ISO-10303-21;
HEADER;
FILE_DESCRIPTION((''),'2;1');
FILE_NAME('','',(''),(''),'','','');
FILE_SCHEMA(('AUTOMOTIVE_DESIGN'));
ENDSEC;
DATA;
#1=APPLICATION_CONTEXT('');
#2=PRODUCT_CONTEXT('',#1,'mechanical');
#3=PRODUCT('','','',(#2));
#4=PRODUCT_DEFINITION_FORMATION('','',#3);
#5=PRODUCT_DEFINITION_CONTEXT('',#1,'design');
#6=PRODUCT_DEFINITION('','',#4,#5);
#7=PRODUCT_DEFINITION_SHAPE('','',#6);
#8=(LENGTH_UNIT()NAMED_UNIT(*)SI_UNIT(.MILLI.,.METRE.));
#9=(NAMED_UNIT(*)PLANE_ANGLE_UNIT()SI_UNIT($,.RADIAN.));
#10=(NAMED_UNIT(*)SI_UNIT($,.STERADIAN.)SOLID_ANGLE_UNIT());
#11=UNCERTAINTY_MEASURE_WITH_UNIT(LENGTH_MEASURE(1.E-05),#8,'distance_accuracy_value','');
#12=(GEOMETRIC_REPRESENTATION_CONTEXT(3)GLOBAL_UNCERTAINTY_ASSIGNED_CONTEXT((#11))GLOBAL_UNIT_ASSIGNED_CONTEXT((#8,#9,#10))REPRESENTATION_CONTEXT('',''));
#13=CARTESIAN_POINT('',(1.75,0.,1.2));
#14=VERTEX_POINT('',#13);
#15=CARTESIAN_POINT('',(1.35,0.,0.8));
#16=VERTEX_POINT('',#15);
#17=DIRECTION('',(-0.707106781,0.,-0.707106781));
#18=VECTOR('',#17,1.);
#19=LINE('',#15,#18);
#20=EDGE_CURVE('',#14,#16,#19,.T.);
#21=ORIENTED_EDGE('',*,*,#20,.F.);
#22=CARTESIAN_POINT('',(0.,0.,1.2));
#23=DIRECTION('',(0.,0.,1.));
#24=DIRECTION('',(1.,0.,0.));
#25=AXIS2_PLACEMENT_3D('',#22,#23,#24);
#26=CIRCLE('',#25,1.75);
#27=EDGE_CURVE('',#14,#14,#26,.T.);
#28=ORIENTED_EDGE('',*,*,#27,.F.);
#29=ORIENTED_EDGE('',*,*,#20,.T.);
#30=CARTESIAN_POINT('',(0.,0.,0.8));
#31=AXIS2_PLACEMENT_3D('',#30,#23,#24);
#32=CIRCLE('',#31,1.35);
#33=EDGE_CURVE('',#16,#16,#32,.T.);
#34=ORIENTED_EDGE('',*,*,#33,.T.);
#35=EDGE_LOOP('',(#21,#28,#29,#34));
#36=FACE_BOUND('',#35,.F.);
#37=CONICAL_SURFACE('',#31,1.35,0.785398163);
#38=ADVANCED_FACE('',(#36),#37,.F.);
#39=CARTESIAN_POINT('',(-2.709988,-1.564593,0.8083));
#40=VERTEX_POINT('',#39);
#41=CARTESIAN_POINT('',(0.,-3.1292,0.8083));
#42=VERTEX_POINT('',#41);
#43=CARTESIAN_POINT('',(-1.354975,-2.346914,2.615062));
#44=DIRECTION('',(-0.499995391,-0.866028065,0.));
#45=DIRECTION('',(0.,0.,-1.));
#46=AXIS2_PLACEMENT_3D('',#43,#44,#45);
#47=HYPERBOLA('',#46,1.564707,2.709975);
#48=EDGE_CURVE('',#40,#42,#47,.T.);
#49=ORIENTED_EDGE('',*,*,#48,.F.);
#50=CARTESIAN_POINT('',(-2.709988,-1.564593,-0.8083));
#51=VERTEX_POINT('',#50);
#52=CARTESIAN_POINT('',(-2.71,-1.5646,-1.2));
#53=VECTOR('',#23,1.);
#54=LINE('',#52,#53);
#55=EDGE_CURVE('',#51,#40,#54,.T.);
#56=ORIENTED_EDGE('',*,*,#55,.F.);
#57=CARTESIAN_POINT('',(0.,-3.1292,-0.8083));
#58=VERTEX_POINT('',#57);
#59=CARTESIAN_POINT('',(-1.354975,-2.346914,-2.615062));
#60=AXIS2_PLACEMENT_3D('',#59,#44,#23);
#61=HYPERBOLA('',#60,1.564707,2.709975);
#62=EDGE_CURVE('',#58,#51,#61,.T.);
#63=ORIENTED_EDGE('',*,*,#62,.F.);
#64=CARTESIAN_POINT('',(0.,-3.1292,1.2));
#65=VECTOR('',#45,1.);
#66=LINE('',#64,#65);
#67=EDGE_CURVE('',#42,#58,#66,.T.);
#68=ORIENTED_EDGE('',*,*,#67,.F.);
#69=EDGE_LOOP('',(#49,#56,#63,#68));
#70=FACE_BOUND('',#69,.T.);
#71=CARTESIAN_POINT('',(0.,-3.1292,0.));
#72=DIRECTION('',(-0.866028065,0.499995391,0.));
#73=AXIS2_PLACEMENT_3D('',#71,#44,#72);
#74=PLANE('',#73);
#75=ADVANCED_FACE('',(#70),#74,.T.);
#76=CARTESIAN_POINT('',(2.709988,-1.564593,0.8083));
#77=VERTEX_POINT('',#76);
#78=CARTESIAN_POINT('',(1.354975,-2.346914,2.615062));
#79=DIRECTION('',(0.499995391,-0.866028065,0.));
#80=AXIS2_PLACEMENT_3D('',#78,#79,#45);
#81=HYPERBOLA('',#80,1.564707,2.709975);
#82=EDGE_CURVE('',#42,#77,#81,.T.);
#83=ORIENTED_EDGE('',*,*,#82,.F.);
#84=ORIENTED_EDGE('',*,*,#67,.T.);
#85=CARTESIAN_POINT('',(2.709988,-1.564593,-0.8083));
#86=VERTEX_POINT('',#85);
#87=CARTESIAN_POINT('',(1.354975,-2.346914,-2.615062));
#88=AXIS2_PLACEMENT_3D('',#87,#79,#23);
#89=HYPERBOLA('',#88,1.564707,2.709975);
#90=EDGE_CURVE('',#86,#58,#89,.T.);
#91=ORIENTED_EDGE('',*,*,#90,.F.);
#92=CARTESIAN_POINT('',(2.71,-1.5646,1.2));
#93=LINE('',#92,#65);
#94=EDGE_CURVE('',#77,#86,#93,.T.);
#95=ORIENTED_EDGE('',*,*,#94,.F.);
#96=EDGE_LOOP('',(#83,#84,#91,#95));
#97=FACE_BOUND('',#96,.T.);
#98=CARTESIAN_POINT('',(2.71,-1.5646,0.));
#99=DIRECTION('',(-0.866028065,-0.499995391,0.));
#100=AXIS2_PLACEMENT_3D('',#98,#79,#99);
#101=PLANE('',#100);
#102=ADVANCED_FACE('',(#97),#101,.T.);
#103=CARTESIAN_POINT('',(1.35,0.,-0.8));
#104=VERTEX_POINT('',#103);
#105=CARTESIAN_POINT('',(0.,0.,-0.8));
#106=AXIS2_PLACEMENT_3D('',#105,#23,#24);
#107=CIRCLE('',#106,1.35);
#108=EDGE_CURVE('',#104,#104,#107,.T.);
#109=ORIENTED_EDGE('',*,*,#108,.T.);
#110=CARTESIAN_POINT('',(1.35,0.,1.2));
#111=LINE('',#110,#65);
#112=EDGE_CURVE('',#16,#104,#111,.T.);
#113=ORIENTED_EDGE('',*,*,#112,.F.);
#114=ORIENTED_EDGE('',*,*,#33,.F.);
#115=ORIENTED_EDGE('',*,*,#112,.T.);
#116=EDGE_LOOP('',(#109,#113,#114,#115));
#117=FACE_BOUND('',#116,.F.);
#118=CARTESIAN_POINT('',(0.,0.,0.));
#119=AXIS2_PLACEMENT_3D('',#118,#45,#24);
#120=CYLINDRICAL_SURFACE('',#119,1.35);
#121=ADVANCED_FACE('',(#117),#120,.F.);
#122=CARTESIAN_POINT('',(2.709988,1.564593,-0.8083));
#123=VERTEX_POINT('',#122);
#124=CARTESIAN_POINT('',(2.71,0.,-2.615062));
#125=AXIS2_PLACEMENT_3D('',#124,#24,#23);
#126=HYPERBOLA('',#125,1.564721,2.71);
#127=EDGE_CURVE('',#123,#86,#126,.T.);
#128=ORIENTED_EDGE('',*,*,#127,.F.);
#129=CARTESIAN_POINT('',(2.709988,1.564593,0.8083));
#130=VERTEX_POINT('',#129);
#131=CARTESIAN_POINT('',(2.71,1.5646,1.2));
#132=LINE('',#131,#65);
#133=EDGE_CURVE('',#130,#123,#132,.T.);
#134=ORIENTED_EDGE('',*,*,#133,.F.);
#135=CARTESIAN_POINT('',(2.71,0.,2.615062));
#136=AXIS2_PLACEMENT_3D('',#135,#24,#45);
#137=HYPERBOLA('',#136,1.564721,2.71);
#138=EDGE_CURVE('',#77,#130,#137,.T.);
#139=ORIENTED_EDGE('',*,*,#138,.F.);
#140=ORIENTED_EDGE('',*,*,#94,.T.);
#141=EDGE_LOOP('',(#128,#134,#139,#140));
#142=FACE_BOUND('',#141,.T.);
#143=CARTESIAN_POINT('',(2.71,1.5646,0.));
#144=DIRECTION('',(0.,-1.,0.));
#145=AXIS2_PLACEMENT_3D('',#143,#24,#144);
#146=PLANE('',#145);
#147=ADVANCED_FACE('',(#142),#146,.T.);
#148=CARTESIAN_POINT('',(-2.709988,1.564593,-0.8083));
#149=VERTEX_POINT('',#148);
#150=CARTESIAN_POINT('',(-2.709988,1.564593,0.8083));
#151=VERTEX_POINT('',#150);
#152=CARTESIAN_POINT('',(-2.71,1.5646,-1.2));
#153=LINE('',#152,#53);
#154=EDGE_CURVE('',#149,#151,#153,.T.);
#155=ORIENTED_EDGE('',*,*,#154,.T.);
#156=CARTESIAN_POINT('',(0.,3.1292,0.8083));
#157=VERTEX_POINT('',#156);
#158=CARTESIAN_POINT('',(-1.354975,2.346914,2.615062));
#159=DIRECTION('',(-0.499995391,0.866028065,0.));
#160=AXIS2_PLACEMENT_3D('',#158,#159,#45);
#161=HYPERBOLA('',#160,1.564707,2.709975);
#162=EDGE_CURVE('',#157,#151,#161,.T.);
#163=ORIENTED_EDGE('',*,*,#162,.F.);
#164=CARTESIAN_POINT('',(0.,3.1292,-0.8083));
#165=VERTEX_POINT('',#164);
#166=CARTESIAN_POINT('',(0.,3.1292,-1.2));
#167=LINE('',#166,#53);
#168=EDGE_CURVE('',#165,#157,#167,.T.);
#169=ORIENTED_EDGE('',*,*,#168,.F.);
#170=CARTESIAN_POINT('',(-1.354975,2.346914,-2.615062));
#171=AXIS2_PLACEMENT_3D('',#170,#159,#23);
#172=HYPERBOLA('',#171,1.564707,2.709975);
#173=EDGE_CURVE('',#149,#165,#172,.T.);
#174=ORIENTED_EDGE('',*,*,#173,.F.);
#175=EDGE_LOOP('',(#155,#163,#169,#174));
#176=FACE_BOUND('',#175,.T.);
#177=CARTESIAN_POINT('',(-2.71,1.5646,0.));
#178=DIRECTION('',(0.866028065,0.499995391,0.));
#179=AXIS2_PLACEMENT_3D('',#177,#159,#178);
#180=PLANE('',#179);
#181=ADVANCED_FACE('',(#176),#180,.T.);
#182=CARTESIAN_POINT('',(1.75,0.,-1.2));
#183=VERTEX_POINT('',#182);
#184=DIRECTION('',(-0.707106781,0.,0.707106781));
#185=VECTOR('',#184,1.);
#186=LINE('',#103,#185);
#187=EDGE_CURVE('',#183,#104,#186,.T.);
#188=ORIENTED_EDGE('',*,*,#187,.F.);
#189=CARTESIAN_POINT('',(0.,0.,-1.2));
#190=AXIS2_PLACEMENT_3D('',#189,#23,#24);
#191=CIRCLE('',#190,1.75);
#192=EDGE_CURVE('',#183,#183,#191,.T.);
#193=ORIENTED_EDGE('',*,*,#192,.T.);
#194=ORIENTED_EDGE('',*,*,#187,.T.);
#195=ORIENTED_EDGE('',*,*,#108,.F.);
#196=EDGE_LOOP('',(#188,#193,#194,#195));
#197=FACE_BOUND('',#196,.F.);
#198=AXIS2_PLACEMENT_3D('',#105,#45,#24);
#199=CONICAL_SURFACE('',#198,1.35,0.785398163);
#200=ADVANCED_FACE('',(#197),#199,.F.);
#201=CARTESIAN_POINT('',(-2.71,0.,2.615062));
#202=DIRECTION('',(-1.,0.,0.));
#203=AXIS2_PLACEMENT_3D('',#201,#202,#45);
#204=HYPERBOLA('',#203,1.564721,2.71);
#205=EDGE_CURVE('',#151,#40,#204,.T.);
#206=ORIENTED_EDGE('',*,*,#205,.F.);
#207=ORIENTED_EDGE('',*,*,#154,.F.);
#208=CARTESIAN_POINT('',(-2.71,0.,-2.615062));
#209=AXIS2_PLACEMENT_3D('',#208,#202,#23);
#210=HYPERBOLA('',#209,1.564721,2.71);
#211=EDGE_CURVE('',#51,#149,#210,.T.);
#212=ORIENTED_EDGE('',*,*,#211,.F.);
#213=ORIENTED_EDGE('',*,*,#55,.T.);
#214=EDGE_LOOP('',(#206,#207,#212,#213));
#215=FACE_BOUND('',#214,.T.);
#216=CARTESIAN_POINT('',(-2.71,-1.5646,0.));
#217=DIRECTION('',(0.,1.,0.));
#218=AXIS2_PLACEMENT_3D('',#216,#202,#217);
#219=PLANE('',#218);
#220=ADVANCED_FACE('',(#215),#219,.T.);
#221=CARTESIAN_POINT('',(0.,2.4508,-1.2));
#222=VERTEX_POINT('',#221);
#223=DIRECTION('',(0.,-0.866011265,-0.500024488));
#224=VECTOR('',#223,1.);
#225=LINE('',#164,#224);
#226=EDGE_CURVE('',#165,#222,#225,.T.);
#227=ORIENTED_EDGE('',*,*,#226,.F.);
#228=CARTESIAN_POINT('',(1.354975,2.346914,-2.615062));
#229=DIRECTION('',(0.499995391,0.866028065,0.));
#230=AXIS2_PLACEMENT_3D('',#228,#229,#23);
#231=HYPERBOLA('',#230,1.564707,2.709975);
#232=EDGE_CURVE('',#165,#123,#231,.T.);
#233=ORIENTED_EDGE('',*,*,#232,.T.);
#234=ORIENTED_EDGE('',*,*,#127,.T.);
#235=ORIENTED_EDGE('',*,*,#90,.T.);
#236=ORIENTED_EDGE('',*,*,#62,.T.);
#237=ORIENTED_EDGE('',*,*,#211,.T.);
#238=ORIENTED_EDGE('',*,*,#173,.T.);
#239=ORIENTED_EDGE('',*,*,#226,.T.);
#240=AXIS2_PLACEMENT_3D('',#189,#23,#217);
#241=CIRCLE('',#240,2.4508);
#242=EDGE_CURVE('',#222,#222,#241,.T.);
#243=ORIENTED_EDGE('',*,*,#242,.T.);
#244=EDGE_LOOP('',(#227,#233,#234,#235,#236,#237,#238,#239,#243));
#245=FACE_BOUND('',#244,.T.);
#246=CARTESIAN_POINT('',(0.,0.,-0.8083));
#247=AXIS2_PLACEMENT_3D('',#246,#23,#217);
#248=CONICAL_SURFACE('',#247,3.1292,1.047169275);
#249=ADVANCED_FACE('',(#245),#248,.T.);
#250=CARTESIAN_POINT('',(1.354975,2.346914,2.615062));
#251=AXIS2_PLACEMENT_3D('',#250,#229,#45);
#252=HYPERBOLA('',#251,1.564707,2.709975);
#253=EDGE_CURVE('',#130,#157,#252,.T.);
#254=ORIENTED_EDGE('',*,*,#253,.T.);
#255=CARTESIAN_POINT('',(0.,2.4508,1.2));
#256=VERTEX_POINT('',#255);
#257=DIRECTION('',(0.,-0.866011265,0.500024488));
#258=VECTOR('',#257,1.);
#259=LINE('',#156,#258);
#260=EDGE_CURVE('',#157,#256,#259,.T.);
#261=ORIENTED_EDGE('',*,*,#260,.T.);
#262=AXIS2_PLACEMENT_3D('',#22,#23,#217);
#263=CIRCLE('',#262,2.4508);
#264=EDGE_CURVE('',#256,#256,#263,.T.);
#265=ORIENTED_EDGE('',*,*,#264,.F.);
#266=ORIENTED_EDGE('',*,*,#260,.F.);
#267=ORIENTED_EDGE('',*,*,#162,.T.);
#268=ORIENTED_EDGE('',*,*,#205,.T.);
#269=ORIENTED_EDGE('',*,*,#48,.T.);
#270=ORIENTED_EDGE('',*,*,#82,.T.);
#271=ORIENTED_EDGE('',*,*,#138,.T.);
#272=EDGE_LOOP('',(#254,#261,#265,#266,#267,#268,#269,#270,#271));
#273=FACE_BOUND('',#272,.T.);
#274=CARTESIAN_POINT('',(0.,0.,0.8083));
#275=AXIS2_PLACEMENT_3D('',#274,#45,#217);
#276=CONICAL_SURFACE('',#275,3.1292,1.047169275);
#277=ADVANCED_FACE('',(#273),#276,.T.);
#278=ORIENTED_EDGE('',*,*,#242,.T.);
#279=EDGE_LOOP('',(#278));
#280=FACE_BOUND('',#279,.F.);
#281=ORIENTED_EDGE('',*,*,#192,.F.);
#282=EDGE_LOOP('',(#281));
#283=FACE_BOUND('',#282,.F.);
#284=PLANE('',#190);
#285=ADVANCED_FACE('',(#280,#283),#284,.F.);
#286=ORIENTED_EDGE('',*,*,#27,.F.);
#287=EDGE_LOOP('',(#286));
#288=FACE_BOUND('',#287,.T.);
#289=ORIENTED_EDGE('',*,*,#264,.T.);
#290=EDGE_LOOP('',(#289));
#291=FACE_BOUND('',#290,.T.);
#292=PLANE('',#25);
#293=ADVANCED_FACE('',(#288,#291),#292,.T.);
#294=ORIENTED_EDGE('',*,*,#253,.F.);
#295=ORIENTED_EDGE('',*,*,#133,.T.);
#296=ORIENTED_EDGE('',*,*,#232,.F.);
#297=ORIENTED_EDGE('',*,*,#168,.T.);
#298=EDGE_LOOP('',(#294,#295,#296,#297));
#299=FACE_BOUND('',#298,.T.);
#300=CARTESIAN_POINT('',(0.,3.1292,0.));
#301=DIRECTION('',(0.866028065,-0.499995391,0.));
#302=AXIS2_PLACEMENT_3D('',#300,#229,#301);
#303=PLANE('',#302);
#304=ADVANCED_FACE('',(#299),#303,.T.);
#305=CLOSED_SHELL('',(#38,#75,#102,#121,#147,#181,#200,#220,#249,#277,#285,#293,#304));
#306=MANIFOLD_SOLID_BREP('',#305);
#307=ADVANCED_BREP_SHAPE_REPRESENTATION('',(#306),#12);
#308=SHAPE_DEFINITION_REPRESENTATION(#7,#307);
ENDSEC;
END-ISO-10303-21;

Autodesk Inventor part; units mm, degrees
ref_plane "YZ Plane" through (0, 0, 0) normal (1, 0, 0) x (0, 1, 0)
ref_plane "XZ Plane" through (0, 0, 0) normal (0, 1, 0) x (-1, 0, 0)
ref_plane "XY Plane" through (0, 0, 0) normal (0, 0, 1) x (1, 0, 0)
sketch "Эскиз1" plane through (0, 0, 0) normal (0, 0, 1) x (1, 0, 0)
  circle A0 centre (0, 0) radius 1.35
  line L0 (0, 3.1292) -> (2.71, 1.5646)
  line L1 (2.71, 1.5646) -> (2.71, -1.5646)
  line L2 (2.71, -1.5646) -> (0, -3.1292)
  line L3 (0, -3.1292) -> (-2.71, -1.5646)
  line L4 (-2.71, -1.5646) -> (-2.71, 1.5646)
  line L5 (-2.71, 1.5646) -> (0, 3.1292)
  dimension "d0" = 2.7
  dimension "d1" = 5.42
extrude "Выдавливание1" add sketch "Эскиз1" along normal mid plane 2.4
chamfer "Фаска1" distance 0.4 angle 45 2 edges at (-1.35, 0, 1.2) (-1.35, 0, -1.2)
sketch "Эскиз2" plane through (0, 0, 0) normal (1, 0, 0) x (0, 1, 0)
  line L0 (0, -4.7585) -> (0, 2.7781)
  line L1 (3.1292, -1.2) -> (3.1292, 1.2) projected
  line L2 (1.5646, 1.2) -> (3.1292, 1.2) projected
  line L3 (1.5646, -1.2) -> (1.5646, 1.2) projected
  line L4 (3.1292, -1.2) -> (1.5646, -1.2) projected
  line L5 (3.1292, 0.8083) -> (2.4508, 1.2)
  point P0 (0, 0)
  dimension "d7" = 30
revolve "Вращение1" cut sketch "Эскиз2" angle 360 about axis through (0, 0, -4.7585) along (0, 0, 1) contours L5 L2 L1
mirror "Зеркальное отражение1" about plane through (0, 0, 0) normal (0, 0, 1) of "Вращение1"
properties part number "Гайка М3"
